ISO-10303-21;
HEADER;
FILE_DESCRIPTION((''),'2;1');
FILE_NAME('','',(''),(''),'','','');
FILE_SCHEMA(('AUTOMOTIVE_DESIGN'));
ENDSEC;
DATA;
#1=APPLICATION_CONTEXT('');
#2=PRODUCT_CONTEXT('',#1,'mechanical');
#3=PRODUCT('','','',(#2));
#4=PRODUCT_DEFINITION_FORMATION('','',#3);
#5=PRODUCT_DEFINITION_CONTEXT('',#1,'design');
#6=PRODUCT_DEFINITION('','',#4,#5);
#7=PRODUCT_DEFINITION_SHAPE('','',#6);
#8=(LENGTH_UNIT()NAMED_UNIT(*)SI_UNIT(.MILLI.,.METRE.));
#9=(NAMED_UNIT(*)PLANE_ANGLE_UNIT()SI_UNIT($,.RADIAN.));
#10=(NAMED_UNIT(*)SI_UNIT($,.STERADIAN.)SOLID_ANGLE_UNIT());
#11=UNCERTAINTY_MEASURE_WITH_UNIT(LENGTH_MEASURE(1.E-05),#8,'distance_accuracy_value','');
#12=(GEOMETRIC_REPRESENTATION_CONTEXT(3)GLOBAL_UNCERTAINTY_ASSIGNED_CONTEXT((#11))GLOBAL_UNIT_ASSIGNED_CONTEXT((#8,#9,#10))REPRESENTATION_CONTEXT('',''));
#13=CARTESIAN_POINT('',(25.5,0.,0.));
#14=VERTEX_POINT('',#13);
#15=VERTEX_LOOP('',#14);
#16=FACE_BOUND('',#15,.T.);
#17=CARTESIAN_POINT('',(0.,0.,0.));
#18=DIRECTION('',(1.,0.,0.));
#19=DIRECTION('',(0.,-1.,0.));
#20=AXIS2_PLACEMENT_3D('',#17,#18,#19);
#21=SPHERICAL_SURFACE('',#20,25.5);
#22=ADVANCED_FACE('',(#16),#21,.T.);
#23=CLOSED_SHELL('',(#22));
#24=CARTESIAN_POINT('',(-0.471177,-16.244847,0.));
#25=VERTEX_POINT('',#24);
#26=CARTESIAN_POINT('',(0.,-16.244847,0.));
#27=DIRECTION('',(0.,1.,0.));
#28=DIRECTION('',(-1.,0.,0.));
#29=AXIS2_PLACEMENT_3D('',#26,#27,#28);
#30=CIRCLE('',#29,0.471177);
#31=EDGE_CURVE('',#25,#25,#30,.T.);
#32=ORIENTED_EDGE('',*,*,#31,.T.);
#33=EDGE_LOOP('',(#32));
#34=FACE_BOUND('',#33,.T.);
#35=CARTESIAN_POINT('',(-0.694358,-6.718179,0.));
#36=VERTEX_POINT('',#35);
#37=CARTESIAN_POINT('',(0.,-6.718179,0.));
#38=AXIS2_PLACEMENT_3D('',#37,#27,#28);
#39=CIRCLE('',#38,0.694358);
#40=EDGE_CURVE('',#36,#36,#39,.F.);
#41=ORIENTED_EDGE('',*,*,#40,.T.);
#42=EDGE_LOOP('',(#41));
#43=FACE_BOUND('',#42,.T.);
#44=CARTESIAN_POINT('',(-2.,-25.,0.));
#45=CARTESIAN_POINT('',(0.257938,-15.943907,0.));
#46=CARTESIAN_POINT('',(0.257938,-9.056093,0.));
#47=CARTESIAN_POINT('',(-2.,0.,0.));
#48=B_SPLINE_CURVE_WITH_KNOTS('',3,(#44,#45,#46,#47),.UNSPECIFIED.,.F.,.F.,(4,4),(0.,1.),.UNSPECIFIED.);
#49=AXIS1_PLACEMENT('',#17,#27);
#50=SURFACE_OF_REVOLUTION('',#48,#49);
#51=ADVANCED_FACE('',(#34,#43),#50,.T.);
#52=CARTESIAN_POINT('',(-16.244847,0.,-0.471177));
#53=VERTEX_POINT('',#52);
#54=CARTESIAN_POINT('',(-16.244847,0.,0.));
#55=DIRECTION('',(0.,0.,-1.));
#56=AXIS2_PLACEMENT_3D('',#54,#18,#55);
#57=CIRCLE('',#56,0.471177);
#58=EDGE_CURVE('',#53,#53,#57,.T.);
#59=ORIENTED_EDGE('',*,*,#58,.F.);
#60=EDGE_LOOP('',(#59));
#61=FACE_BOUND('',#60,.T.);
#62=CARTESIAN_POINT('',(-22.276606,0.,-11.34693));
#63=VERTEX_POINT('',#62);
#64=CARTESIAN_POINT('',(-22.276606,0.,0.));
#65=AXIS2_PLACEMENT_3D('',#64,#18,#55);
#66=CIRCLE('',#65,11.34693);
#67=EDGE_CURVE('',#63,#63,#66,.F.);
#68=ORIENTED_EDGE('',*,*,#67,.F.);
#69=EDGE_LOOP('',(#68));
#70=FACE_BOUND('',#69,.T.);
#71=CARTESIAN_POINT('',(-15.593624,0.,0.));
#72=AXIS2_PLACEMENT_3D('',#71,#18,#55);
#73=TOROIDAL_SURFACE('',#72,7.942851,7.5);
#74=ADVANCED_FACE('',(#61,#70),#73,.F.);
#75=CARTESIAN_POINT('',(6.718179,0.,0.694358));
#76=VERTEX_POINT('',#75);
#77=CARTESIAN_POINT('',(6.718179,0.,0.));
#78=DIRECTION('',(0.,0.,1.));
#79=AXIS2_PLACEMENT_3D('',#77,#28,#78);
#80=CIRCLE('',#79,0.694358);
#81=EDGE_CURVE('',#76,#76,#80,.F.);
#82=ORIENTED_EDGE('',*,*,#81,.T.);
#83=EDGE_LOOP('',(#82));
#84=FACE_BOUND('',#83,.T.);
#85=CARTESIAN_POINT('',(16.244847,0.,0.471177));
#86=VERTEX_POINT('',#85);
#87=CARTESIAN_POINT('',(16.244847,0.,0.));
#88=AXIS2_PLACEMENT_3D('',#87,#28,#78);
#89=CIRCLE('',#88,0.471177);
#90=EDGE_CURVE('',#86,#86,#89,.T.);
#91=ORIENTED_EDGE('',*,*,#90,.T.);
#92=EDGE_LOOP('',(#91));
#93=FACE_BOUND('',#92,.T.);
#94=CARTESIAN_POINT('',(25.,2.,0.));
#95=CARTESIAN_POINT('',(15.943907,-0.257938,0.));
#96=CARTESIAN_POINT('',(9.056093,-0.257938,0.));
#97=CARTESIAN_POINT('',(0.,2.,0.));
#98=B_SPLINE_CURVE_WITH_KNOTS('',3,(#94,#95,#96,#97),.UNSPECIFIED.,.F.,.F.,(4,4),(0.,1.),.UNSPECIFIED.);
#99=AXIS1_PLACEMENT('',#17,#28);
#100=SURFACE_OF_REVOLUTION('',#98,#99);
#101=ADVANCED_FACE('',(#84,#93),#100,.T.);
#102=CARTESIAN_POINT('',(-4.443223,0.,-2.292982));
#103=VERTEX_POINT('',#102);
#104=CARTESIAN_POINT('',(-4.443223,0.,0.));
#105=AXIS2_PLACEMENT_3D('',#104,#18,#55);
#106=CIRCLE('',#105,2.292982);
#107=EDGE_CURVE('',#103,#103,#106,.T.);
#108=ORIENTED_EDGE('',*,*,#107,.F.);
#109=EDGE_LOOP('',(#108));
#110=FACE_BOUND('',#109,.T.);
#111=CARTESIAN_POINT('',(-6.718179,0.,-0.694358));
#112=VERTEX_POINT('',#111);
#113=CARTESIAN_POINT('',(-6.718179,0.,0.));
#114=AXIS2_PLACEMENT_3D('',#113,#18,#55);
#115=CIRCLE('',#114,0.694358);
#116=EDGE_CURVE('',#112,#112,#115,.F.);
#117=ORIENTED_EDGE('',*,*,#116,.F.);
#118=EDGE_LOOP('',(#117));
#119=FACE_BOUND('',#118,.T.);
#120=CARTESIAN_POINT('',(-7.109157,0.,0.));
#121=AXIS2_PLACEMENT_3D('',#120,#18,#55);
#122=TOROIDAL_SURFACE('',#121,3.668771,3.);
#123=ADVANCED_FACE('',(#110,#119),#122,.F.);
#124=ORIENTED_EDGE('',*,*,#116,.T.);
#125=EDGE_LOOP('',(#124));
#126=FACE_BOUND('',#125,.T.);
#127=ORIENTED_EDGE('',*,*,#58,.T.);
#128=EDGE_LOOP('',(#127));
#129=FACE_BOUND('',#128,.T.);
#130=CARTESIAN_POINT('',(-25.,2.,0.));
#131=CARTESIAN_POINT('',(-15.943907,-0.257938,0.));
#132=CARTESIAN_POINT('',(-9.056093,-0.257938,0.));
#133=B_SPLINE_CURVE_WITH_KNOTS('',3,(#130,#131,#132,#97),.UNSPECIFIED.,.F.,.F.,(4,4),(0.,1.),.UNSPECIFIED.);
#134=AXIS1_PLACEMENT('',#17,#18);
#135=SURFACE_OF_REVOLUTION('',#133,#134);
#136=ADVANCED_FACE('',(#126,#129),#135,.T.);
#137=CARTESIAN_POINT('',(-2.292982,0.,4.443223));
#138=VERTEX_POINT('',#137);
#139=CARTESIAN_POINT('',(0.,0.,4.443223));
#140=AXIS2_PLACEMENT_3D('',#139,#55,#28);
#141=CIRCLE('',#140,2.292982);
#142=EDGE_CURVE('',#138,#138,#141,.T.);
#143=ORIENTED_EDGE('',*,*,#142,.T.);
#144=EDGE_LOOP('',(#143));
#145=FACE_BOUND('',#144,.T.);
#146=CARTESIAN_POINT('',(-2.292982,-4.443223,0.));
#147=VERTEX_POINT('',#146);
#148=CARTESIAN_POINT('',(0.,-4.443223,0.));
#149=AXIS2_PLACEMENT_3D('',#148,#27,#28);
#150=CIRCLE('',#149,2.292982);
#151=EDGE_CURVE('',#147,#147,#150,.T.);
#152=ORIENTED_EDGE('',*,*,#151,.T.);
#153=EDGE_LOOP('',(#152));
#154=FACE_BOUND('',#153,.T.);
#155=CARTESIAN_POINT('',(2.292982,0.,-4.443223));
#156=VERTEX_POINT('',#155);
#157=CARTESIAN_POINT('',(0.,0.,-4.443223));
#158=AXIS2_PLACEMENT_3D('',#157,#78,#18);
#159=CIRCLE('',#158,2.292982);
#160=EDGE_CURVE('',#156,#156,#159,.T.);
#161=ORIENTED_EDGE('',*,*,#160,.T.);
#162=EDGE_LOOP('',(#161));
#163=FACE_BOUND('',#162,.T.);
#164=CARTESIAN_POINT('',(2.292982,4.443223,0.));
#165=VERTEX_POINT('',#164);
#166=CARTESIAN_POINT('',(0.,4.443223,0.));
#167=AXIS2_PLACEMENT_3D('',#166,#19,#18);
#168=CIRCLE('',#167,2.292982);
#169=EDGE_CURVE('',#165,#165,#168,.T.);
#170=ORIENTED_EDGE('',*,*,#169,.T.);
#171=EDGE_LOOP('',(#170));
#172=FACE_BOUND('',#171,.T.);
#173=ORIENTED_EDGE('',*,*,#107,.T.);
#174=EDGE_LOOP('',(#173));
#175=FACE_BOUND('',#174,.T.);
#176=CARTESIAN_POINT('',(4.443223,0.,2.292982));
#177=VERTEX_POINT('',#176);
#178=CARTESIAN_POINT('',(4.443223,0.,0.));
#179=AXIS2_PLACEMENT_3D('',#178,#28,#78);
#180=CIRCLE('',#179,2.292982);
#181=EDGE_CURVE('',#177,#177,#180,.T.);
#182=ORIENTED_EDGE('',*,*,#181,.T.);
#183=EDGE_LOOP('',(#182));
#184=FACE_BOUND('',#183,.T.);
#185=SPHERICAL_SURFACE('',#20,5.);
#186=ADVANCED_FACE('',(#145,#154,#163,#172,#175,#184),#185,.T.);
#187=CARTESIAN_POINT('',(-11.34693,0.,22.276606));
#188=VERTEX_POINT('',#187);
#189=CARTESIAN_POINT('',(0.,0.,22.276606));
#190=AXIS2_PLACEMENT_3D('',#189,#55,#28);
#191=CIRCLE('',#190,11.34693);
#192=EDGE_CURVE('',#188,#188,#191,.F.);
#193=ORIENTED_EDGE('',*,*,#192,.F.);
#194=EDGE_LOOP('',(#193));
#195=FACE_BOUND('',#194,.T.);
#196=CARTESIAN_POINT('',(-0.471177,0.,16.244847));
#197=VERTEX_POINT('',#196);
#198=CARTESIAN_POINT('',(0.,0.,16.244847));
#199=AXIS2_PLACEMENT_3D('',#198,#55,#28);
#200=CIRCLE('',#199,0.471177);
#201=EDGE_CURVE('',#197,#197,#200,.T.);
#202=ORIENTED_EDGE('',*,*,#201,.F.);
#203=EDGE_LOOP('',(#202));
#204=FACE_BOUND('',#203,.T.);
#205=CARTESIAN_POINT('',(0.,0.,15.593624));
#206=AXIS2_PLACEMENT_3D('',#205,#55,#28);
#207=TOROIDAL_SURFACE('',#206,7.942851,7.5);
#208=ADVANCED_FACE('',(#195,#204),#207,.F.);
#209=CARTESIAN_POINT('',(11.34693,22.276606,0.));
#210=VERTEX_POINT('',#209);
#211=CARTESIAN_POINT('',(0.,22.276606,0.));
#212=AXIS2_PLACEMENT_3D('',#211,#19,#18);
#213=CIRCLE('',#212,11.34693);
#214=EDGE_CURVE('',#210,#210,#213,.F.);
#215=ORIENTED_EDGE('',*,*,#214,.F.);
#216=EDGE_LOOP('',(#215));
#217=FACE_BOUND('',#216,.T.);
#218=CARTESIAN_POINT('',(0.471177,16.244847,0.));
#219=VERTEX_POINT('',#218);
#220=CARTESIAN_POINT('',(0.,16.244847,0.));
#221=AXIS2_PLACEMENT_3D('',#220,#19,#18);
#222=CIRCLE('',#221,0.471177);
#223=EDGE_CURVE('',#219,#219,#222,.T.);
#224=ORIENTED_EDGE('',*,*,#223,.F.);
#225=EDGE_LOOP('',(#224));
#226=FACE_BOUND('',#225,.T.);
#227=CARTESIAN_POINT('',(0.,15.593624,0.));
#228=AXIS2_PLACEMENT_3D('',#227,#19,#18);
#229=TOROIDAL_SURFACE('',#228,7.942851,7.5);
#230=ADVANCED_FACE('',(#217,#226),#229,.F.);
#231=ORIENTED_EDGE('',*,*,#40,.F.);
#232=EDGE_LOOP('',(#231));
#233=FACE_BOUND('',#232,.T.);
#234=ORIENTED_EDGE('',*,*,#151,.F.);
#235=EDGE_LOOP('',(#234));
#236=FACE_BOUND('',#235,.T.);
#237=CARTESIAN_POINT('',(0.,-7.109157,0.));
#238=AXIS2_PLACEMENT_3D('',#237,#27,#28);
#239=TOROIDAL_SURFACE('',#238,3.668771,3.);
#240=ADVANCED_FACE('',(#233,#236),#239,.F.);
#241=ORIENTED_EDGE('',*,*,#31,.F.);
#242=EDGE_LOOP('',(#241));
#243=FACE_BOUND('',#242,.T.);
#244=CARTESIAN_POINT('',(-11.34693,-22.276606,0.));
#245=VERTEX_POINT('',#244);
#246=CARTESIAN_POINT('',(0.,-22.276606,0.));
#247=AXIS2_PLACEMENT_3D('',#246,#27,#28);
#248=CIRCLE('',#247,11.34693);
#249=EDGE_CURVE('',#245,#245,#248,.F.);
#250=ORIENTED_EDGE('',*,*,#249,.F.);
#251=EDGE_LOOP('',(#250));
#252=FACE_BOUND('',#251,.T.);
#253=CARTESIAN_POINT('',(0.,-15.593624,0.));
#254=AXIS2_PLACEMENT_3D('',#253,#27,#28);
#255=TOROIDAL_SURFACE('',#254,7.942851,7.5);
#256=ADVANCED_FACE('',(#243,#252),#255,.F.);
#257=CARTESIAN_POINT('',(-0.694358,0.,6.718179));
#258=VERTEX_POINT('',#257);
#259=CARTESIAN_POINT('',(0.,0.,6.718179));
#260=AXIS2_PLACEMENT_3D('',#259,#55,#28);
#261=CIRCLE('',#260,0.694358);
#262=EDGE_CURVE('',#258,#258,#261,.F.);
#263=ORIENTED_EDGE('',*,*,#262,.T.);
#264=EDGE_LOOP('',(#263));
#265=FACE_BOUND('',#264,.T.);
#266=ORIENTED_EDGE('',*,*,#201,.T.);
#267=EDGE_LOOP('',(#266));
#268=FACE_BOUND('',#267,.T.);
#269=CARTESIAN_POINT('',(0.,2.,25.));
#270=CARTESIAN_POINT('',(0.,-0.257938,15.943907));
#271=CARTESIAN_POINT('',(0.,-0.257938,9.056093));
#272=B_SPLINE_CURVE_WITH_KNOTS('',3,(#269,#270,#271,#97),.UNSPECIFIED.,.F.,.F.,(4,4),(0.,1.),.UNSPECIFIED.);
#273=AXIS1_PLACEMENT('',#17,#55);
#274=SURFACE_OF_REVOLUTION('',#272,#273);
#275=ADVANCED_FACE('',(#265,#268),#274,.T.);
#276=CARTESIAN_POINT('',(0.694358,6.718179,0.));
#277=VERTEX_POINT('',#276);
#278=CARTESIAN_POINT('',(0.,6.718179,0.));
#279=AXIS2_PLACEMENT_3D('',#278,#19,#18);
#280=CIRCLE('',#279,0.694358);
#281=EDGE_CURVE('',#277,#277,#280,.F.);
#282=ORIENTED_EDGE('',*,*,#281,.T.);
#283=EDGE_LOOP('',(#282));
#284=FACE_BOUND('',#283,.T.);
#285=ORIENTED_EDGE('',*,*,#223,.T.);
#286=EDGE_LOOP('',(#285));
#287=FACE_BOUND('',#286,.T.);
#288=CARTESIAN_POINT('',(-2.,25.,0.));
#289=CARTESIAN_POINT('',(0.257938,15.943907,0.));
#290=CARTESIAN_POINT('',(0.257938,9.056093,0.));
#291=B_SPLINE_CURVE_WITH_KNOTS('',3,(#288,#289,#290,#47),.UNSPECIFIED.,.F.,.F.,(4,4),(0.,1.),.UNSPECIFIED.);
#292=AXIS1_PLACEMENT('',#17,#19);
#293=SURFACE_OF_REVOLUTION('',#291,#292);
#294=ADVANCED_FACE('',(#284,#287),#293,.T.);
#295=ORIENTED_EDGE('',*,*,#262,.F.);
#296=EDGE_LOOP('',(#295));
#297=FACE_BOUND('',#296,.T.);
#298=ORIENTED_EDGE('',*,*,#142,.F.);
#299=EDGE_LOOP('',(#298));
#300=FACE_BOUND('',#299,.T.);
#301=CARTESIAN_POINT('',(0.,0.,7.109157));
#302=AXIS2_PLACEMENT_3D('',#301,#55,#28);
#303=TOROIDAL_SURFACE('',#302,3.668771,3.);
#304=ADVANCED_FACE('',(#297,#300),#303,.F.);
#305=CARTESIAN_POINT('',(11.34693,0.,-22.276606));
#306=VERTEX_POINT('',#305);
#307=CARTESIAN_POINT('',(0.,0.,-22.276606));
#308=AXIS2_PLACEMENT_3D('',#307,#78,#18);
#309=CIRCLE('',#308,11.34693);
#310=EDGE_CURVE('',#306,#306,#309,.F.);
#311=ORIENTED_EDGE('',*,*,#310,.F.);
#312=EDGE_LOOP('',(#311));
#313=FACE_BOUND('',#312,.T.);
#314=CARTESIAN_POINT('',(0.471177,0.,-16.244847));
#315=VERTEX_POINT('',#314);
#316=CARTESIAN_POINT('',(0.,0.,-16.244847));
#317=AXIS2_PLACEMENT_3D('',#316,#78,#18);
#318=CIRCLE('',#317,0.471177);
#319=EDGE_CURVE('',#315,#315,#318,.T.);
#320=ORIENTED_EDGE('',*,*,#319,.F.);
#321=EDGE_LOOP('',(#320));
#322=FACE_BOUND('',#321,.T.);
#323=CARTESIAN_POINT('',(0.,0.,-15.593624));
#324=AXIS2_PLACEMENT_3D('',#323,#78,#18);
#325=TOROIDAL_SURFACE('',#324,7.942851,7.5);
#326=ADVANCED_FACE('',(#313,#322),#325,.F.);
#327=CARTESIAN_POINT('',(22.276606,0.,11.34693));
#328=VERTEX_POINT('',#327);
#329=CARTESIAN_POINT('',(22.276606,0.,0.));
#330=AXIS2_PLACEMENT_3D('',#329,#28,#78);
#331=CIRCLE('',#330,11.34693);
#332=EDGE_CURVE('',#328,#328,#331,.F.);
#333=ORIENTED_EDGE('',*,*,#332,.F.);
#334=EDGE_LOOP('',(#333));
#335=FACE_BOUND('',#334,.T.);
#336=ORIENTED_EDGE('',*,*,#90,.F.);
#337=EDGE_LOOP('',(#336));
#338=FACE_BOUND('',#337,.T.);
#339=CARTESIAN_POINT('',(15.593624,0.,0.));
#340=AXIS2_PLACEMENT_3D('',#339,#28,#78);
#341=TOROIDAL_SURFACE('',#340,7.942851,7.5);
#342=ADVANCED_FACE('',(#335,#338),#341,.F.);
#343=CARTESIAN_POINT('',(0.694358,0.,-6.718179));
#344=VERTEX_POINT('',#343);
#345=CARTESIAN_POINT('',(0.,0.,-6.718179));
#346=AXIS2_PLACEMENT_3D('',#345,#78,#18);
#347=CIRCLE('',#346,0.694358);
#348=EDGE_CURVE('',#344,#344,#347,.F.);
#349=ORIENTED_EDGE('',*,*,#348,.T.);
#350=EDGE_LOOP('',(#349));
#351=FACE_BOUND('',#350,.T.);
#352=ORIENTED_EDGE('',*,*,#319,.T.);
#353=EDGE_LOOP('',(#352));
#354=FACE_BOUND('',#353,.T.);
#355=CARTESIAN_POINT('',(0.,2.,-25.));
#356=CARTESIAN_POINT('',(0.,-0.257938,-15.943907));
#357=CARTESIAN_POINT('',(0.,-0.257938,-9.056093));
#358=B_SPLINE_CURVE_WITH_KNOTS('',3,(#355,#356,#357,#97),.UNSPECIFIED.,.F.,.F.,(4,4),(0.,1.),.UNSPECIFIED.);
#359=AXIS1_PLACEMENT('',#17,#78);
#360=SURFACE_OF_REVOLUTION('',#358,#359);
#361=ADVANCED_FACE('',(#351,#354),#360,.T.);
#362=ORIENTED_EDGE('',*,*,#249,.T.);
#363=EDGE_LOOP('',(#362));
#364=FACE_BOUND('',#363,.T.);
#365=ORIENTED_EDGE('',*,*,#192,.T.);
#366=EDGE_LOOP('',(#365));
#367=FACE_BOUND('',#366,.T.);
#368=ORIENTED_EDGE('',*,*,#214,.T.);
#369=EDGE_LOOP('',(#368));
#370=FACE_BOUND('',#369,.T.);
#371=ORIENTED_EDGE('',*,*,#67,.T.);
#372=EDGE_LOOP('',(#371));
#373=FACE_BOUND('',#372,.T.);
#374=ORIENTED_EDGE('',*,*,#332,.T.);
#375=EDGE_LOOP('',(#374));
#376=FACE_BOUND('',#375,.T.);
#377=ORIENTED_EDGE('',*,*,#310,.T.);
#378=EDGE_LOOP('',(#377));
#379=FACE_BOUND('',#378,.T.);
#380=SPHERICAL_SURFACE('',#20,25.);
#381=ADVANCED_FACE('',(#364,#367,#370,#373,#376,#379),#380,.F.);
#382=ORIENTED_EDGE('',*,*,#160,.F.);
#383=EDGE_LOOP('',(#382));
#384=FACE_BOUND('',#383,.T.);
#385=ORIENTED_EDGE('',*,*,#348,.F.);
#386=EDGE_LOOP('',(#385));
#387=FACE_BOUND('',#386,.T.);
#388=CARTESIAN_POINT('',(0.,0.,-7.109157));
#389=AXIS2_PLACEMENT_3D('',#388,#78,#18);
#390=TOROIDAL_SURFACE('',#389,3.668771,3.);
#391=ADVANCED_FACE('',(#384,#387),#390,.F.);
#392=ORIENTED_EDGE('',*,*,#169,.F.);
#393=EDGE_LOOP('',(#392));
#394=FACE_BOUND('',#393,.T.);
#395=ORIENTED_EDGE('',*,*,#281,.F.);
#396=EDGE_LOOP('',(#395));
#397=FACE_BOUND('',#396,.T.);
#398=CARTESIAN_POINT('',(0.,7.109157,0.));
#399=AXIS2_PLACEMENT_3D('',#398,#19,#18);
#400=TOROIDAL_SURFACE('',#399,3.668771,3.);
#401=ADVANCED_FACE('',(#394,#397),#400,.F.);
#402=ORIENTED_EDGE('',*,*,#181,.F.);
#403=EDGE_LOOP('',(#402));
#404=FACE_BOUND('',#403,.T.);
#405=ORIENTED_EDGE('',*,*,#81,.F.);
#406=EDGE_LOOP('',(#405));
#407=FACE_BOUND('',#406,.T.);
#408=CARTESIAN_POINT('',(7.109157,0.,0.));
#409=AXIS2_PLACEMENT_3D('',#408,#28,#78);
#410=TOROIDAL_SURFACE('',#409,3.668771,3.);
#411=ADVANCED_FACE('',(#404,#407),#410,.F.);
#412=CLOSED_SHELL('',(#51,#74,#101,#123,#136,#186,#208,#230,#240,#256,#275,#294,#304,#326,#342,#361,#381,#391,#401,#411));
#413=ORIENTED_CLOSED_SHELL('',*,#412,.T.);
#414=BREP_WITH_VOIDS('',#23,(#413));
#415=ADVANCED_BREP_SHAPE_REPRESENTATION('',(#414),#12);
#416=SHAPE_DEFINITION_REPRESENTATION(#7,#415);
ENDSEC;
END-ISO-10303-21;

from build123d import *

# Parameters (mm, degrees)
VERRUNDUNG3_R              = 7.5
VERRUNDUNG5_R              = 3
VERRUNDUNG3_OF_SPIEGELN3_R = 7.5
VERRUNDUNG5_OF_SPIEGELN3_R = 3


# Read off the part's stored shape, not the designer's step: Spiegeln4, Spiegeln5
with BuildPart() as part:
    # Skizze1 → Rotation1 (revolve)
    with BuildSketch(Plane.XY):
        with BuildLine():
            Line((-25.5, 0), (-25, 0))
            ThreePointArc((-25, 0), (0, 25), (25, 0))
            Line((25, 0), (25.5, 0))
            ThreePointArc((25.5, 0), (0, 25.5), (-25.5, 0))
        make_face()
        with BuildLine():
            Line((-5, 0), (5, 0))
            ThreePointArc((5, 0), (0, 5), (-5, 0))
        make_face()
    revolve(axis=Axis((0, 0, 0), (-1, 0, 0)))

    # Skizze1<3> → Rotation3 (revolve)
    with BuildSketch(Plane.XY, mode=Mode.PRIVATE) as rotation3_sk:
        with BuildLine():
            Line((-25, 0), (-25, 2))
            add(Edge.make_bspline(
                [(-25, 2), (-15.943906555, -0.257937692), (-9.056093445, -0.257937692), (0, 2)],
                knots=[0, 0, 0, 0, 1, 1, 1, 1], degree=3))
            Line((0, 2), (0, 0))
            Line((0, 0), (-25, 0))
        make_face()
    rotation3 = revolve(rotation3_sk.sketch.rotate(Axis((0, 0, 0), (-1, 0, 0)), 180), axis=Axis((0, 0, 0), (-1, 0, 0)))

    # Verrundung3
    verrundung3_edges = [part.edges().sort_by_distance(p)[0] for p in [
        (-24.921432573, 0, -1.980454107),
    ]]
    fillet(verrundung3_edges, radius=VERRUNDUNG3_R)

    # Verrundung5
    verrundung5_edges = [part.edges().sort_by_distance(p)[0] for p in [
        (-4.905784294, 0, -0.966064423),
    ]]
    fillet(verrundung5_edges, radius=VERRUNDUNG5_R)

    # Spiegeln3: Rotation3 across plane
    add(rotation3.mirror(Plane(origin=(0, 0, 0), x_dir=(0, 0, 1), z_dir=(1, 0, 0))))

    # Verrundung3 of Spiegeln3
    verrundung3_of_spiegeln3_edges = [part.edges().sort_by_distance(p)[0] for p in [
        (24.921432573, 0, -1.980454107),
    ]]
    fillet(verrundung3_of_spiegeln3_edges, radius=VERRUNDUNG3_OF_SPIEGELN3_R)

    # Verrundung5 of Spiegeln3
    verrundung5_of_spiegeln3_edges = [part.edges().sort_by_distance(p)[0] for p in [
        (4.905784294, 0, -0.966064423),
    ]]
    fillet(verrundung5_of_spiegeln3_edges, radius=VERRUNDUNG5_OF_SPIEGELN3_R)

    # Spiegeln4: part across plane


with BuildPart() as part_1:
    add(part.part)
    add(part.part.mirror(Plane(origin=(0, 0, 0), x_dir=(0, 0, 1), z_dir=(0.7071067811865476, 0.7071067811865476, 0))))

    # Spiegeln5: part across plane


with BuildPart() as part_2:
    add(part_1.part)
    add(part_1.part.mirror(Plane(origin=(0, 0, 0), x_dir=(0.7071067811865478, 0, 0.7071067811865472), z_dir=(0.7071067811865475, 0, -0.7071067811865477))))


solid = part_2.part
